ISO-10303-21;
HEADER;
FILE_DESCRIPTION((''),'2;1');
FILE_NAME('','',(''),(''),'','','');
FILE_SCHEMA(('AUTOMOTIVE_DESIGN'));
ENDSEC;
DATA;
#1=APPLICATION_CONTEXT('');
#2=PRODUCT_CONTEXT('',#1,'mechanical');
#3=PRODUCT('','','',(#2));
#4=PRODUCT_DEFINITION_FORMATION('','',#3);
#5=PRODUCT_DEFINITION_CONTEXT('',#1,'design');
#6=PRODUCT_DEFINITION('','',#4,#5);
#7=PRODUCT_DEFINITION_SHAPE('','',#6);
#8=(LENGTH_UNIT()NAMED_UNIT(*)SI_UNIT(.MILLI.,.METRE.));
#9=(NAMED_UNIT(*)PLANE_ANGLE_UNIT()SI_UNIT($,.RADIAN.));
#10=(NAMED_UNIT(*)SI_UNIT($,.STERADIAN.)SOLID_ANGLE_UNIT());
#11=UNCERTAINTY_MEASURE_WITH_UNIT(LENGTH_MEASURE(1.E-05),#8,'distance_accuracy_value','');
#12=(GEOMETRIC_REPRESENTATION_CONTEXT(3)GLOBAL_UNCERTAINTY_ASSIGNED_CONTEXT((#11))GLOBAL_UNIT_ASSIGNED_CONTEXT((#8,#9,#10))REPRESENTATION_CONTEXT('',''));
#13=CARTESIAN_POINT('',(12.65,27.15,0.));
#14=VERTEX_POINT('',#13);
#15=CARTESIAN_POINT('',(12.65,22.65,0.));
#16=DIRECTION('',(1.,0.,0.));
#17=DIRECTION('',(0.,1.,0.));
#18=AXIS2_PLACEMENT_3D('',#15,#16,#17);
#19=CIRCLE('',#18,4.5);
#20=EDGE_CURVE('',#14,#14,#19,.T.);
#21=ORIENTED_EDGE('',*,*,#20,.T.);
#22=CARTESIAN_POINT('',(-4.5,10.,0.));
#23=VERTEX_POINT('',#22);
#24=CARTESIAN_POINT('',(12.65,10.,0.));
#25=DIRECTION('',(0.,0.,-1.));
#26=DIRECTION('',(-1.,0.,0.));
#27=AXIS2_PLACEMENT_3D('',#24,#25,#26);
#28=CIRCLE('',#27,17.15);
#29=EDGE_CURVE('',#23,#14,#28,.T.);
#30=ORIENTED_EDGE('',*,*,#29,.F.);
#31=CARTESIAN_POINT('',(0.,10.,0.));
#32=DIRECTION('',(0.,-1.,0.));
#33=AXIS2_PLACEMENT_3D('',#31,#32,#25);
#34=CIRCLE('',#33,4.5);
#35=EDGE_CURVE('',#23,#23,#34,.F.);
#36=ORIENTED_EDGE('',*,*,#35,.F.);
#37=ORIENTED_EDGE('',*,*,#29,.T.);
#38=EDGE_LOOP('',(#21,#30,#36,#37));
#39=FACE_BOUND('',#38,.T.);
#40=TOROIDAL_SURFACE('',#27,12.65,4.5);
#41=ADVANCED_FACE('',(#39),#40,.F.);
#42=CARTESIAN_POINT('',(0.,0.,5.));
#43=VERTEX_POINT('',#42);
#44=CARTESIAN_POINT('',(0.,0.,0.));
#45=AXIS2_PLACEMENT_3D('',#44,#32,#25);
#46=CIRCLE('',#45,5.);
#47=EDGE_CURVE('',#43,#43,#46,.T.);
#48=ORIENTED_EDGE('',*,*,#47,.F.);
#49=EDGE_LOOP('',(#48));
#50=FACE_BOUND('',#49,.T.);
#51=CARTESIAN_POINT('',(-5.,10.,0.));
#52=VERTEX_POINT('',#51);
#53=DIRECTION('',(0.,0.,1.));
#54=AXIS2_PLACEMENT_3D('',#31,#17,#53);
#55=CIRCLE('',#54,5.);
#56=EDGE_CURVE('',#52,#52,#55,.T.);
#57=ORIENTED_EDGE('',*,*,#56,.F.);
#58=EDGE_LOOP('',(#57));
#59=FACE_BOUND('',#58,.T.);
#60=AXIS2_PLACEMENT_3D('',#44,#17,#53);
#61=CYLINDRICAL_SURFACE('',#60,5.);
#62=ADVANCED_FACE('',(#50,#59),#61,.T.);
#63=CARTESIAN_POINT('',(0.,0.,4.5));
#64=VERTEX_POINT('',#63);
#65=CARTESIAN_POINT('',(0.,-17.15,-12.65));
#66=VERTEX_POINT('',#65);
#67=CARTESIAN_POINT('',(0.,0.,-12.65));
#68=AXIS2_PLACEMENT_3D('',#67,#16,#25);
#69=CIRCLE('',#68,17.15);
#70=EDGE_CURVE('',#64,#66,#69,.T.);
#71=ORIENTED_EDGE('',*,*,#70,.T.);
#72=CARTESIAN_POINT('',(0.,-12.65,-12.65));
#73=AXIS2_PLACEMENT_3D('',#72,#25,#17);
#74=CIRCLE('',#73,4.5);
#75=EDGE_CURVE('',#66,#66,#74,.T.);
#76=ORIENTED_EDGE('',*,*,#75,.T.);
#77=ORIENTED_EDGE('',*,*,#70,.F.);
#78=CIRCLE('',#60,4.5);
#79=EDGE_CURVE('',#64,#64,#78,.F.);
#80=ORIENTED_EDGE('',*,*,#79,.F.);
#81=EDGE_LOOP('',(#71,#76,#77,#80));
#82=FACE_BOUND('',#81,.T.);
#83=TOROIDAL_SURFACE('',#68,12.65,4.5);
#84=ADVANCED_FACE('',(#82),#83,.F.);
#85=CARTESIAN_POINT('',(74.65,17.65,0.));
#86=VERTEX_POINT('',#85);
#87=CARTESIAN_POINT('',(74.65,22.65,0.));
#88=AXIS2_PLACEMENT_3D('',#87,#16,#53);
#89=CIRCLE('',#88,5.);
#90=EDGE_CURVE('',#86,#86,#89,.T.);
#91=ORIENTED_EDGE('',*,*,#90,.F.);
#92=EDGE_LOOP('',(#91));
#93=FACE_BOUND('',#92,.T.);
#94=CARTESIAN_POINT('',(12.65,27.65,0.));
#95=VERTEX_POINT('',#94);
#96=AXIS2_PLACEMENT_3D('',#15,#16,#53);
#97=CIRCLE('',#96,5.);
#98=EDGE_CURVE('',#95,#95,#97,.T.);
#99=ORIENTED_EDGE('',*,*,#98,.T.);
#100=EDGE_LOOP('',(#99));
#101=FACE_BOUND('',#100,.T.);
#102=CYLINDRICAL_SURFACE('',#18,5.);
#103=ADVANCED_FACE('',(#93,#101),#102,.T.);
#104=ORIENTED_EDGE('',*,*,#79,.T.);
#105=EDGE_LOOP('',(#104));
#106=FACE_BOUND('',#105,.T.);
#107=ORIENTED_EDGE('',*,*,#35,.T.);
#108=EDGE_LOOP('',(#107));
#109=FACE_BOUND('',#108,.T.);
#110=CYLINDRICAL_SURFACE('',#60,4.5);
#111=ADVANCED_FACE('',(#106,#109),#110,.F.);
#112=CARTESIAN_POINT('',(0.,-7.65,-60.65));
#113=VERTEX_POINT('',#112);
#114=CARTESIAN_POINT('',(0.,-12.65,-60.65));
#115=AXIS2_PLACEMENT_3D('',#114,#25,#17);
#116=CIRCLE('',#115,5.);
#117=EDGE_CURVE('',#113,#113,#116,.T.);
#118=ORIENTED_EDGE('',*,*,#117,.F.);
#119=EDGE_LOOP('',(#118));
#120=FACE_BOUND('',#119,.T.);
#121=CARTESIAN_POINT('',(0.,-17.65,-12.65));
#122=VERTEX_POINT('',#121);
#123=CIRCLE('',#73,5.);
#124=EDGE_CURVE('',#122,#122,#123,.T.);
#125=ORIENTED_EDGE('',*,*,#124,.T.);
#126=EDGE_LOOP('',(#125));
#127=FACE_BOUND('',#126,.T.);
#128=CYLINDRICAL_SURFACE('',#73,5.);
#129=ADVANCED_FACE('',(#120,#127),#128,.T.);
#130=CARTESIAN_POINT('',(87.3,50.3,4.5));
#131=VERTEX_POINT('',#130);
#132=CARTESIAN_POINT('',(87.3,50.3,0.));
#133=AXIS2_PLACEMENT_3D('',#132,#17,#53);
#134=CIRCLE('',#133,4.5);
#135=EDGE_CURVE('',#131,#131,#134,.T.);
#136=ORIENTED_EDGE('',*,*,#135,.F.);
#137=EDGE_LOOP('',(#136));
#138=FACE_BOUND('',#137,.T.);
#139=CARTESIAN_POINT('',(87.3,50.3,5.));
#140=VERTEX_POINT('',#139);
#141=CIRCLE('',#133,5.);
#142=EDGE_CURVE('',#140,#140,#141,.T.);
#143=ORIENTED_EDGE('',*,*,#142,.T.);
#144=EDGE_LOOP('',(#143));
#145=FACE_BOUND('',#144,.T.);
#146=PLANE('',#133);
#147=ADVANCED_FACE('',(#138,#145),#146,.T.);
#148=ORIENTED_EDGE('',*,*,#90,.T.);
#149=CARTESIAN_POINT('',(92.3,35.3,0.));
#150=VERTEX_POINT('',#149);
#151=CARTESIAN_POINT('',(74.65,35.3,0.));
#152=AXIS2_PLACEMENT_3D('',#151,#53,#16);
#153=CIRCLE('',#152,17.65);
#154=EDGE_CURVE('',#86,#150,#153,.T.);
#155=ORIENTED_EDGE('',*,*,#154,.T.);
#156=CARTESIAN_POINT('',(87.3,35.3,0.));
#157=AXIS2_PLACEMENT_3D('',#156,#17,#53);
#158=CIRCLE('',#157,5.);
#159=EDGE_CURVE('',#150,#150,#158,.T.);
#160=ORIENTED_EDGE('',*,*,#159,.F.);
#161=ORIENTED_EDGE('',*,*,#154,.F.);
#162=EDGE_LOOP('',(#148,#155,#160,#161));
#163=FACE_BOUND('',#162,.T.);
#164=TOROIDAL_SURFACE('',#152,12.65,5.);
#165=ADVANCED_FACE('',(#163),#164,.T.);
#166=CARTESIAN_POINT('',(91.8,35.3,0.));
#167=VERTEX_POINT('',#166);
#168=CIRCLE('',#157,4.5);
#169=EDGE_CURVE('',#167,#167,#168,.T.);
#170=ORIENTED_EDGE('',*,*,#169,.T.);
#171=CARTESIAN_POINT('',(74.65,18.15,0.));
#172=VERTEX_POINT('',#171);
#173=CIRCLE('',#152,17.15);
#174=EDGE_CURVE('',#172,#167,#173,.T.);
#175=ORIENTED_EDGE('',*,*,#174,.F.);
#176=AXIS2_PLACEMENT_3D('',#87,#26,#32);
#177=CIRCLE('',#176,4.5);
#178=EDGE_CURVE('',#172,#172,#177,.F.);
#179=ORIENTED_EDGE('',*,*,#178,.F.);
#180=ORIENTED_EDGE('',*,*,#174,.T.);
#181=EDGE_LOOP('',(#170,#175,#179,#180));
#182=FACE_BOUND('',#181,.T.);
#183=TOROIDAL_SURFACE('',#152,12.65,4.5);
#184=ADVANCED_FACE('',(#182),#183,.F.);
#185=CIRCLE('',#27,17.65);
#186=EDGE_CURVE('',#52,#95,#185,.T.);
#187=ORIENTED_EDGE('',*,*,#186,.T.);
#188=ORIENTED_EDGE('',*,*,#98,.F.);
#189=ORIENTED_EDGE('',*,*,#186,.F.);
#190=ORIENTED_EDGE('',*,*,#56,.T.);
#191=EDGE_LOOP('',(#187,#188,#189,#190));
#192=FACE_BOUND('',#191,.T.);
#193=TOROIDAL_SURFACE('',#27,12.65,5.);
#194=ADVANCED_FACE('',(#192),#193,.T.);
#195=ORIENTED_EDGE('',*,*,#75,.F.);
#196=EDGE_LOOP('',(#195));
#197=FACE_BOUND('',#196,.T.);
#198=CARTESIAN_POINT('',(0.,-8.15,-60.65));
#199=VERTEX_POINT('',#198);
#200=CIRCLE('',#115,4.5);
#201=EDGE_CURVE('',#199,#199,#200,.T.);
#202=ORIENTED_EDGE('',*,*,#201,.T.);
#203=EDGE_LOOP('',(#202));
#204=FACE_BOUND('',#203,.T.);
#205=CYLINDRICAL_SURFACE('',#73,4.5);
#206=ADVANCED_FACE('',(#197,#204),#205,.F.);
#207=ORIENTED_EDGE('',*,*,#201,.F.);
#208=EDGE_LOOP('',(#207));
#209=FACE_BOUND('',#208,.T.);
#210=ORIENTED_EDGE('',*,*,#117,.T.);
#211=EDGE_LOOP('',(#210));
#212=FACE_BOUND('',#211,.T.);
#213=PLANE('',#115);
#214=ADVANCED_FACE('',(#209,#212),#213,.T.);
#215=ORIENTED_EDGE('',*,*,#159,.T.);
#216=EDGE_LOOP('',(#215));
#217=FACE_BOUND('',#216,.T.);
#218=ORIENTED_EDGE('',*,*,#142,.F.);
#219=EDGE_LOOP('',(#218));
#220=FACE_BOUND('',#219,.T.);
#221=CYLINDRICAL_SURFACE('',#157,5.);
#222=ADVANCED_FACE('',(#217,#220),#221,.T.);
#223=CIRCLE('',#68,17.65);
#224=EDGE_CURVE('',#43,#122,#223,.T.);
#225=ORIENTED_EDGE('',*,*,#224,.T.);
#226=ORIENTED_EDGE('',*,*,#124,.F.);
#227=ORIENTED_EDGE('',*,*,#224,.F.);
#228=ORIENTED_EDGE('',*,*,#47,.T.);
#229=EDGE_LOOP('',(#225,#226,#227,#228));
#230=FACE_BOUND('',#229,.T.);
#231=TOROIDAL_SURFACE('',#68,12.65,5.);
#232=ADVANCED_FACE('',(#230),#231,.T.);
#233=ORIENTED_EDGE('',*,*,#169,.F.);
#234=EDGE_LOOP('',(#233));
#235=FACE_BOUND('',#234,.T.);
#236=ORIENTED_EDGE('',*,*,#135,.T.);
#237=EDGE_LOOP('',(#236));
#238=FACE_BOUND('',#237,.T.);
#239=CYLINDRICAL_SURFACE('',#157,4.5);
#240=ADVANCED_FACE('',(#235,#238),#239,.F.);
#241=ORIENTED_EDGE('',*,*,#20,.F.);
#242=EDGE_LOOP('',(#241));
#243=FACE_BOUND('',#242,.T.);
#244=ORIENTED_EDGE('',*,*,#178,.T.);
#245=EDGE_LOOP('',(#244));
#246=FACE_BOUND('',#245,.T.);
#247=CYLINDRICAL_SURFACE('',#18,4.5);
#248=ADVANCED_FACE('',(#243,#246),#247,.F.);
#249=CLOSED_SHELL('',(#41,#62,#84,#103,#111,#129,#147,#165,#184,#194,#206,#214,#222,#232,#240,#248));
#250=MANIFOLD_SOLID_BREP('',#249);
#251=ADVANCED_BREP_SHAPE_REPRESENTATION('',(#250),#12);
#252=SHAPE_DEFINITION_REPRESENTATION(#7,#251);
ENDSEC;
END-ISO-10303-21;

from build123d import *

# Parameters (mm, degrees)
SKETCH2_R          = 5
SWEEP2_OUTLINE_R   = 5
SWEEP2_ANGLE       = 90
SWEEP2_START       = -60.65
SWEEP2_2_OUTLINE_R = 5
SWEEP2_2_DEPTH     = 48.65
SHELL1_T           = -0.5


with BuildPart() as part:
    # Sweep1: sweep along a path in Sketch3
    with BuildLine(Plane.XY) as sweep1_path:
        Line((0, 0), (0, 10))
        ThreePointArc((0, 10), (3.705099218, 18.944900782), (12.65, 22.65))
        Line((12.65, 22.65), (74.65, 22.65))
        ThreePointArc((74.65, 22.65), (83.594900782, 26.355099218), (87.3, 35.3))
        Line((87.3, 35.3), (87.3, 50.3))
    # Sketch2 → Sweep1 (sweep)
    with BuildSketch(Plane(origin=(0, 0, 0), x_dir=(1, 0, 0), z_dir=(0, 1, 0))):
        Circle(SKETCH2_R)
    sweep(path=sweep1_path.line)

    # Sweep2: read off the stored shape, not the designer's step
    # Sweep2 outline → Sweep2 (revolve)
    with BuildSketch(Plane(origin=(0, 0, -12.65), x_dir=(0, 0, 1), z_dir=(0, 1, 0))):
        with Locations((12.65, 0)):
            Circle(SWEEP2_OUTLINE_R)
    revolve(axis=Axis((0, 0, -12.65), (1, 0, 0)), revolution_arc=SWEEP2_ANGLE)

    # Sweep2 2 outline → Sweep2 2 (add)
    with BuildSketch(Plane.XY.offset(SWEEP2_START)):
        with Locations((0, -12.65)):
            Circle(SWEEP2_2_OUTLINE_R)
    extrude(amount=SWEEP2_2_DEPTH)

    # Shell1
    shell1_openings = [part.faces().sort_by_distance(p)[0] for p in [
        (0, -12.65, -60.65),
        (87.3, 50.3, 0),
    ]]
    offset(amount=SHELL1_T, openings=shell1_openings, kind=Kind.INTERSECTION)


solid = part.part
